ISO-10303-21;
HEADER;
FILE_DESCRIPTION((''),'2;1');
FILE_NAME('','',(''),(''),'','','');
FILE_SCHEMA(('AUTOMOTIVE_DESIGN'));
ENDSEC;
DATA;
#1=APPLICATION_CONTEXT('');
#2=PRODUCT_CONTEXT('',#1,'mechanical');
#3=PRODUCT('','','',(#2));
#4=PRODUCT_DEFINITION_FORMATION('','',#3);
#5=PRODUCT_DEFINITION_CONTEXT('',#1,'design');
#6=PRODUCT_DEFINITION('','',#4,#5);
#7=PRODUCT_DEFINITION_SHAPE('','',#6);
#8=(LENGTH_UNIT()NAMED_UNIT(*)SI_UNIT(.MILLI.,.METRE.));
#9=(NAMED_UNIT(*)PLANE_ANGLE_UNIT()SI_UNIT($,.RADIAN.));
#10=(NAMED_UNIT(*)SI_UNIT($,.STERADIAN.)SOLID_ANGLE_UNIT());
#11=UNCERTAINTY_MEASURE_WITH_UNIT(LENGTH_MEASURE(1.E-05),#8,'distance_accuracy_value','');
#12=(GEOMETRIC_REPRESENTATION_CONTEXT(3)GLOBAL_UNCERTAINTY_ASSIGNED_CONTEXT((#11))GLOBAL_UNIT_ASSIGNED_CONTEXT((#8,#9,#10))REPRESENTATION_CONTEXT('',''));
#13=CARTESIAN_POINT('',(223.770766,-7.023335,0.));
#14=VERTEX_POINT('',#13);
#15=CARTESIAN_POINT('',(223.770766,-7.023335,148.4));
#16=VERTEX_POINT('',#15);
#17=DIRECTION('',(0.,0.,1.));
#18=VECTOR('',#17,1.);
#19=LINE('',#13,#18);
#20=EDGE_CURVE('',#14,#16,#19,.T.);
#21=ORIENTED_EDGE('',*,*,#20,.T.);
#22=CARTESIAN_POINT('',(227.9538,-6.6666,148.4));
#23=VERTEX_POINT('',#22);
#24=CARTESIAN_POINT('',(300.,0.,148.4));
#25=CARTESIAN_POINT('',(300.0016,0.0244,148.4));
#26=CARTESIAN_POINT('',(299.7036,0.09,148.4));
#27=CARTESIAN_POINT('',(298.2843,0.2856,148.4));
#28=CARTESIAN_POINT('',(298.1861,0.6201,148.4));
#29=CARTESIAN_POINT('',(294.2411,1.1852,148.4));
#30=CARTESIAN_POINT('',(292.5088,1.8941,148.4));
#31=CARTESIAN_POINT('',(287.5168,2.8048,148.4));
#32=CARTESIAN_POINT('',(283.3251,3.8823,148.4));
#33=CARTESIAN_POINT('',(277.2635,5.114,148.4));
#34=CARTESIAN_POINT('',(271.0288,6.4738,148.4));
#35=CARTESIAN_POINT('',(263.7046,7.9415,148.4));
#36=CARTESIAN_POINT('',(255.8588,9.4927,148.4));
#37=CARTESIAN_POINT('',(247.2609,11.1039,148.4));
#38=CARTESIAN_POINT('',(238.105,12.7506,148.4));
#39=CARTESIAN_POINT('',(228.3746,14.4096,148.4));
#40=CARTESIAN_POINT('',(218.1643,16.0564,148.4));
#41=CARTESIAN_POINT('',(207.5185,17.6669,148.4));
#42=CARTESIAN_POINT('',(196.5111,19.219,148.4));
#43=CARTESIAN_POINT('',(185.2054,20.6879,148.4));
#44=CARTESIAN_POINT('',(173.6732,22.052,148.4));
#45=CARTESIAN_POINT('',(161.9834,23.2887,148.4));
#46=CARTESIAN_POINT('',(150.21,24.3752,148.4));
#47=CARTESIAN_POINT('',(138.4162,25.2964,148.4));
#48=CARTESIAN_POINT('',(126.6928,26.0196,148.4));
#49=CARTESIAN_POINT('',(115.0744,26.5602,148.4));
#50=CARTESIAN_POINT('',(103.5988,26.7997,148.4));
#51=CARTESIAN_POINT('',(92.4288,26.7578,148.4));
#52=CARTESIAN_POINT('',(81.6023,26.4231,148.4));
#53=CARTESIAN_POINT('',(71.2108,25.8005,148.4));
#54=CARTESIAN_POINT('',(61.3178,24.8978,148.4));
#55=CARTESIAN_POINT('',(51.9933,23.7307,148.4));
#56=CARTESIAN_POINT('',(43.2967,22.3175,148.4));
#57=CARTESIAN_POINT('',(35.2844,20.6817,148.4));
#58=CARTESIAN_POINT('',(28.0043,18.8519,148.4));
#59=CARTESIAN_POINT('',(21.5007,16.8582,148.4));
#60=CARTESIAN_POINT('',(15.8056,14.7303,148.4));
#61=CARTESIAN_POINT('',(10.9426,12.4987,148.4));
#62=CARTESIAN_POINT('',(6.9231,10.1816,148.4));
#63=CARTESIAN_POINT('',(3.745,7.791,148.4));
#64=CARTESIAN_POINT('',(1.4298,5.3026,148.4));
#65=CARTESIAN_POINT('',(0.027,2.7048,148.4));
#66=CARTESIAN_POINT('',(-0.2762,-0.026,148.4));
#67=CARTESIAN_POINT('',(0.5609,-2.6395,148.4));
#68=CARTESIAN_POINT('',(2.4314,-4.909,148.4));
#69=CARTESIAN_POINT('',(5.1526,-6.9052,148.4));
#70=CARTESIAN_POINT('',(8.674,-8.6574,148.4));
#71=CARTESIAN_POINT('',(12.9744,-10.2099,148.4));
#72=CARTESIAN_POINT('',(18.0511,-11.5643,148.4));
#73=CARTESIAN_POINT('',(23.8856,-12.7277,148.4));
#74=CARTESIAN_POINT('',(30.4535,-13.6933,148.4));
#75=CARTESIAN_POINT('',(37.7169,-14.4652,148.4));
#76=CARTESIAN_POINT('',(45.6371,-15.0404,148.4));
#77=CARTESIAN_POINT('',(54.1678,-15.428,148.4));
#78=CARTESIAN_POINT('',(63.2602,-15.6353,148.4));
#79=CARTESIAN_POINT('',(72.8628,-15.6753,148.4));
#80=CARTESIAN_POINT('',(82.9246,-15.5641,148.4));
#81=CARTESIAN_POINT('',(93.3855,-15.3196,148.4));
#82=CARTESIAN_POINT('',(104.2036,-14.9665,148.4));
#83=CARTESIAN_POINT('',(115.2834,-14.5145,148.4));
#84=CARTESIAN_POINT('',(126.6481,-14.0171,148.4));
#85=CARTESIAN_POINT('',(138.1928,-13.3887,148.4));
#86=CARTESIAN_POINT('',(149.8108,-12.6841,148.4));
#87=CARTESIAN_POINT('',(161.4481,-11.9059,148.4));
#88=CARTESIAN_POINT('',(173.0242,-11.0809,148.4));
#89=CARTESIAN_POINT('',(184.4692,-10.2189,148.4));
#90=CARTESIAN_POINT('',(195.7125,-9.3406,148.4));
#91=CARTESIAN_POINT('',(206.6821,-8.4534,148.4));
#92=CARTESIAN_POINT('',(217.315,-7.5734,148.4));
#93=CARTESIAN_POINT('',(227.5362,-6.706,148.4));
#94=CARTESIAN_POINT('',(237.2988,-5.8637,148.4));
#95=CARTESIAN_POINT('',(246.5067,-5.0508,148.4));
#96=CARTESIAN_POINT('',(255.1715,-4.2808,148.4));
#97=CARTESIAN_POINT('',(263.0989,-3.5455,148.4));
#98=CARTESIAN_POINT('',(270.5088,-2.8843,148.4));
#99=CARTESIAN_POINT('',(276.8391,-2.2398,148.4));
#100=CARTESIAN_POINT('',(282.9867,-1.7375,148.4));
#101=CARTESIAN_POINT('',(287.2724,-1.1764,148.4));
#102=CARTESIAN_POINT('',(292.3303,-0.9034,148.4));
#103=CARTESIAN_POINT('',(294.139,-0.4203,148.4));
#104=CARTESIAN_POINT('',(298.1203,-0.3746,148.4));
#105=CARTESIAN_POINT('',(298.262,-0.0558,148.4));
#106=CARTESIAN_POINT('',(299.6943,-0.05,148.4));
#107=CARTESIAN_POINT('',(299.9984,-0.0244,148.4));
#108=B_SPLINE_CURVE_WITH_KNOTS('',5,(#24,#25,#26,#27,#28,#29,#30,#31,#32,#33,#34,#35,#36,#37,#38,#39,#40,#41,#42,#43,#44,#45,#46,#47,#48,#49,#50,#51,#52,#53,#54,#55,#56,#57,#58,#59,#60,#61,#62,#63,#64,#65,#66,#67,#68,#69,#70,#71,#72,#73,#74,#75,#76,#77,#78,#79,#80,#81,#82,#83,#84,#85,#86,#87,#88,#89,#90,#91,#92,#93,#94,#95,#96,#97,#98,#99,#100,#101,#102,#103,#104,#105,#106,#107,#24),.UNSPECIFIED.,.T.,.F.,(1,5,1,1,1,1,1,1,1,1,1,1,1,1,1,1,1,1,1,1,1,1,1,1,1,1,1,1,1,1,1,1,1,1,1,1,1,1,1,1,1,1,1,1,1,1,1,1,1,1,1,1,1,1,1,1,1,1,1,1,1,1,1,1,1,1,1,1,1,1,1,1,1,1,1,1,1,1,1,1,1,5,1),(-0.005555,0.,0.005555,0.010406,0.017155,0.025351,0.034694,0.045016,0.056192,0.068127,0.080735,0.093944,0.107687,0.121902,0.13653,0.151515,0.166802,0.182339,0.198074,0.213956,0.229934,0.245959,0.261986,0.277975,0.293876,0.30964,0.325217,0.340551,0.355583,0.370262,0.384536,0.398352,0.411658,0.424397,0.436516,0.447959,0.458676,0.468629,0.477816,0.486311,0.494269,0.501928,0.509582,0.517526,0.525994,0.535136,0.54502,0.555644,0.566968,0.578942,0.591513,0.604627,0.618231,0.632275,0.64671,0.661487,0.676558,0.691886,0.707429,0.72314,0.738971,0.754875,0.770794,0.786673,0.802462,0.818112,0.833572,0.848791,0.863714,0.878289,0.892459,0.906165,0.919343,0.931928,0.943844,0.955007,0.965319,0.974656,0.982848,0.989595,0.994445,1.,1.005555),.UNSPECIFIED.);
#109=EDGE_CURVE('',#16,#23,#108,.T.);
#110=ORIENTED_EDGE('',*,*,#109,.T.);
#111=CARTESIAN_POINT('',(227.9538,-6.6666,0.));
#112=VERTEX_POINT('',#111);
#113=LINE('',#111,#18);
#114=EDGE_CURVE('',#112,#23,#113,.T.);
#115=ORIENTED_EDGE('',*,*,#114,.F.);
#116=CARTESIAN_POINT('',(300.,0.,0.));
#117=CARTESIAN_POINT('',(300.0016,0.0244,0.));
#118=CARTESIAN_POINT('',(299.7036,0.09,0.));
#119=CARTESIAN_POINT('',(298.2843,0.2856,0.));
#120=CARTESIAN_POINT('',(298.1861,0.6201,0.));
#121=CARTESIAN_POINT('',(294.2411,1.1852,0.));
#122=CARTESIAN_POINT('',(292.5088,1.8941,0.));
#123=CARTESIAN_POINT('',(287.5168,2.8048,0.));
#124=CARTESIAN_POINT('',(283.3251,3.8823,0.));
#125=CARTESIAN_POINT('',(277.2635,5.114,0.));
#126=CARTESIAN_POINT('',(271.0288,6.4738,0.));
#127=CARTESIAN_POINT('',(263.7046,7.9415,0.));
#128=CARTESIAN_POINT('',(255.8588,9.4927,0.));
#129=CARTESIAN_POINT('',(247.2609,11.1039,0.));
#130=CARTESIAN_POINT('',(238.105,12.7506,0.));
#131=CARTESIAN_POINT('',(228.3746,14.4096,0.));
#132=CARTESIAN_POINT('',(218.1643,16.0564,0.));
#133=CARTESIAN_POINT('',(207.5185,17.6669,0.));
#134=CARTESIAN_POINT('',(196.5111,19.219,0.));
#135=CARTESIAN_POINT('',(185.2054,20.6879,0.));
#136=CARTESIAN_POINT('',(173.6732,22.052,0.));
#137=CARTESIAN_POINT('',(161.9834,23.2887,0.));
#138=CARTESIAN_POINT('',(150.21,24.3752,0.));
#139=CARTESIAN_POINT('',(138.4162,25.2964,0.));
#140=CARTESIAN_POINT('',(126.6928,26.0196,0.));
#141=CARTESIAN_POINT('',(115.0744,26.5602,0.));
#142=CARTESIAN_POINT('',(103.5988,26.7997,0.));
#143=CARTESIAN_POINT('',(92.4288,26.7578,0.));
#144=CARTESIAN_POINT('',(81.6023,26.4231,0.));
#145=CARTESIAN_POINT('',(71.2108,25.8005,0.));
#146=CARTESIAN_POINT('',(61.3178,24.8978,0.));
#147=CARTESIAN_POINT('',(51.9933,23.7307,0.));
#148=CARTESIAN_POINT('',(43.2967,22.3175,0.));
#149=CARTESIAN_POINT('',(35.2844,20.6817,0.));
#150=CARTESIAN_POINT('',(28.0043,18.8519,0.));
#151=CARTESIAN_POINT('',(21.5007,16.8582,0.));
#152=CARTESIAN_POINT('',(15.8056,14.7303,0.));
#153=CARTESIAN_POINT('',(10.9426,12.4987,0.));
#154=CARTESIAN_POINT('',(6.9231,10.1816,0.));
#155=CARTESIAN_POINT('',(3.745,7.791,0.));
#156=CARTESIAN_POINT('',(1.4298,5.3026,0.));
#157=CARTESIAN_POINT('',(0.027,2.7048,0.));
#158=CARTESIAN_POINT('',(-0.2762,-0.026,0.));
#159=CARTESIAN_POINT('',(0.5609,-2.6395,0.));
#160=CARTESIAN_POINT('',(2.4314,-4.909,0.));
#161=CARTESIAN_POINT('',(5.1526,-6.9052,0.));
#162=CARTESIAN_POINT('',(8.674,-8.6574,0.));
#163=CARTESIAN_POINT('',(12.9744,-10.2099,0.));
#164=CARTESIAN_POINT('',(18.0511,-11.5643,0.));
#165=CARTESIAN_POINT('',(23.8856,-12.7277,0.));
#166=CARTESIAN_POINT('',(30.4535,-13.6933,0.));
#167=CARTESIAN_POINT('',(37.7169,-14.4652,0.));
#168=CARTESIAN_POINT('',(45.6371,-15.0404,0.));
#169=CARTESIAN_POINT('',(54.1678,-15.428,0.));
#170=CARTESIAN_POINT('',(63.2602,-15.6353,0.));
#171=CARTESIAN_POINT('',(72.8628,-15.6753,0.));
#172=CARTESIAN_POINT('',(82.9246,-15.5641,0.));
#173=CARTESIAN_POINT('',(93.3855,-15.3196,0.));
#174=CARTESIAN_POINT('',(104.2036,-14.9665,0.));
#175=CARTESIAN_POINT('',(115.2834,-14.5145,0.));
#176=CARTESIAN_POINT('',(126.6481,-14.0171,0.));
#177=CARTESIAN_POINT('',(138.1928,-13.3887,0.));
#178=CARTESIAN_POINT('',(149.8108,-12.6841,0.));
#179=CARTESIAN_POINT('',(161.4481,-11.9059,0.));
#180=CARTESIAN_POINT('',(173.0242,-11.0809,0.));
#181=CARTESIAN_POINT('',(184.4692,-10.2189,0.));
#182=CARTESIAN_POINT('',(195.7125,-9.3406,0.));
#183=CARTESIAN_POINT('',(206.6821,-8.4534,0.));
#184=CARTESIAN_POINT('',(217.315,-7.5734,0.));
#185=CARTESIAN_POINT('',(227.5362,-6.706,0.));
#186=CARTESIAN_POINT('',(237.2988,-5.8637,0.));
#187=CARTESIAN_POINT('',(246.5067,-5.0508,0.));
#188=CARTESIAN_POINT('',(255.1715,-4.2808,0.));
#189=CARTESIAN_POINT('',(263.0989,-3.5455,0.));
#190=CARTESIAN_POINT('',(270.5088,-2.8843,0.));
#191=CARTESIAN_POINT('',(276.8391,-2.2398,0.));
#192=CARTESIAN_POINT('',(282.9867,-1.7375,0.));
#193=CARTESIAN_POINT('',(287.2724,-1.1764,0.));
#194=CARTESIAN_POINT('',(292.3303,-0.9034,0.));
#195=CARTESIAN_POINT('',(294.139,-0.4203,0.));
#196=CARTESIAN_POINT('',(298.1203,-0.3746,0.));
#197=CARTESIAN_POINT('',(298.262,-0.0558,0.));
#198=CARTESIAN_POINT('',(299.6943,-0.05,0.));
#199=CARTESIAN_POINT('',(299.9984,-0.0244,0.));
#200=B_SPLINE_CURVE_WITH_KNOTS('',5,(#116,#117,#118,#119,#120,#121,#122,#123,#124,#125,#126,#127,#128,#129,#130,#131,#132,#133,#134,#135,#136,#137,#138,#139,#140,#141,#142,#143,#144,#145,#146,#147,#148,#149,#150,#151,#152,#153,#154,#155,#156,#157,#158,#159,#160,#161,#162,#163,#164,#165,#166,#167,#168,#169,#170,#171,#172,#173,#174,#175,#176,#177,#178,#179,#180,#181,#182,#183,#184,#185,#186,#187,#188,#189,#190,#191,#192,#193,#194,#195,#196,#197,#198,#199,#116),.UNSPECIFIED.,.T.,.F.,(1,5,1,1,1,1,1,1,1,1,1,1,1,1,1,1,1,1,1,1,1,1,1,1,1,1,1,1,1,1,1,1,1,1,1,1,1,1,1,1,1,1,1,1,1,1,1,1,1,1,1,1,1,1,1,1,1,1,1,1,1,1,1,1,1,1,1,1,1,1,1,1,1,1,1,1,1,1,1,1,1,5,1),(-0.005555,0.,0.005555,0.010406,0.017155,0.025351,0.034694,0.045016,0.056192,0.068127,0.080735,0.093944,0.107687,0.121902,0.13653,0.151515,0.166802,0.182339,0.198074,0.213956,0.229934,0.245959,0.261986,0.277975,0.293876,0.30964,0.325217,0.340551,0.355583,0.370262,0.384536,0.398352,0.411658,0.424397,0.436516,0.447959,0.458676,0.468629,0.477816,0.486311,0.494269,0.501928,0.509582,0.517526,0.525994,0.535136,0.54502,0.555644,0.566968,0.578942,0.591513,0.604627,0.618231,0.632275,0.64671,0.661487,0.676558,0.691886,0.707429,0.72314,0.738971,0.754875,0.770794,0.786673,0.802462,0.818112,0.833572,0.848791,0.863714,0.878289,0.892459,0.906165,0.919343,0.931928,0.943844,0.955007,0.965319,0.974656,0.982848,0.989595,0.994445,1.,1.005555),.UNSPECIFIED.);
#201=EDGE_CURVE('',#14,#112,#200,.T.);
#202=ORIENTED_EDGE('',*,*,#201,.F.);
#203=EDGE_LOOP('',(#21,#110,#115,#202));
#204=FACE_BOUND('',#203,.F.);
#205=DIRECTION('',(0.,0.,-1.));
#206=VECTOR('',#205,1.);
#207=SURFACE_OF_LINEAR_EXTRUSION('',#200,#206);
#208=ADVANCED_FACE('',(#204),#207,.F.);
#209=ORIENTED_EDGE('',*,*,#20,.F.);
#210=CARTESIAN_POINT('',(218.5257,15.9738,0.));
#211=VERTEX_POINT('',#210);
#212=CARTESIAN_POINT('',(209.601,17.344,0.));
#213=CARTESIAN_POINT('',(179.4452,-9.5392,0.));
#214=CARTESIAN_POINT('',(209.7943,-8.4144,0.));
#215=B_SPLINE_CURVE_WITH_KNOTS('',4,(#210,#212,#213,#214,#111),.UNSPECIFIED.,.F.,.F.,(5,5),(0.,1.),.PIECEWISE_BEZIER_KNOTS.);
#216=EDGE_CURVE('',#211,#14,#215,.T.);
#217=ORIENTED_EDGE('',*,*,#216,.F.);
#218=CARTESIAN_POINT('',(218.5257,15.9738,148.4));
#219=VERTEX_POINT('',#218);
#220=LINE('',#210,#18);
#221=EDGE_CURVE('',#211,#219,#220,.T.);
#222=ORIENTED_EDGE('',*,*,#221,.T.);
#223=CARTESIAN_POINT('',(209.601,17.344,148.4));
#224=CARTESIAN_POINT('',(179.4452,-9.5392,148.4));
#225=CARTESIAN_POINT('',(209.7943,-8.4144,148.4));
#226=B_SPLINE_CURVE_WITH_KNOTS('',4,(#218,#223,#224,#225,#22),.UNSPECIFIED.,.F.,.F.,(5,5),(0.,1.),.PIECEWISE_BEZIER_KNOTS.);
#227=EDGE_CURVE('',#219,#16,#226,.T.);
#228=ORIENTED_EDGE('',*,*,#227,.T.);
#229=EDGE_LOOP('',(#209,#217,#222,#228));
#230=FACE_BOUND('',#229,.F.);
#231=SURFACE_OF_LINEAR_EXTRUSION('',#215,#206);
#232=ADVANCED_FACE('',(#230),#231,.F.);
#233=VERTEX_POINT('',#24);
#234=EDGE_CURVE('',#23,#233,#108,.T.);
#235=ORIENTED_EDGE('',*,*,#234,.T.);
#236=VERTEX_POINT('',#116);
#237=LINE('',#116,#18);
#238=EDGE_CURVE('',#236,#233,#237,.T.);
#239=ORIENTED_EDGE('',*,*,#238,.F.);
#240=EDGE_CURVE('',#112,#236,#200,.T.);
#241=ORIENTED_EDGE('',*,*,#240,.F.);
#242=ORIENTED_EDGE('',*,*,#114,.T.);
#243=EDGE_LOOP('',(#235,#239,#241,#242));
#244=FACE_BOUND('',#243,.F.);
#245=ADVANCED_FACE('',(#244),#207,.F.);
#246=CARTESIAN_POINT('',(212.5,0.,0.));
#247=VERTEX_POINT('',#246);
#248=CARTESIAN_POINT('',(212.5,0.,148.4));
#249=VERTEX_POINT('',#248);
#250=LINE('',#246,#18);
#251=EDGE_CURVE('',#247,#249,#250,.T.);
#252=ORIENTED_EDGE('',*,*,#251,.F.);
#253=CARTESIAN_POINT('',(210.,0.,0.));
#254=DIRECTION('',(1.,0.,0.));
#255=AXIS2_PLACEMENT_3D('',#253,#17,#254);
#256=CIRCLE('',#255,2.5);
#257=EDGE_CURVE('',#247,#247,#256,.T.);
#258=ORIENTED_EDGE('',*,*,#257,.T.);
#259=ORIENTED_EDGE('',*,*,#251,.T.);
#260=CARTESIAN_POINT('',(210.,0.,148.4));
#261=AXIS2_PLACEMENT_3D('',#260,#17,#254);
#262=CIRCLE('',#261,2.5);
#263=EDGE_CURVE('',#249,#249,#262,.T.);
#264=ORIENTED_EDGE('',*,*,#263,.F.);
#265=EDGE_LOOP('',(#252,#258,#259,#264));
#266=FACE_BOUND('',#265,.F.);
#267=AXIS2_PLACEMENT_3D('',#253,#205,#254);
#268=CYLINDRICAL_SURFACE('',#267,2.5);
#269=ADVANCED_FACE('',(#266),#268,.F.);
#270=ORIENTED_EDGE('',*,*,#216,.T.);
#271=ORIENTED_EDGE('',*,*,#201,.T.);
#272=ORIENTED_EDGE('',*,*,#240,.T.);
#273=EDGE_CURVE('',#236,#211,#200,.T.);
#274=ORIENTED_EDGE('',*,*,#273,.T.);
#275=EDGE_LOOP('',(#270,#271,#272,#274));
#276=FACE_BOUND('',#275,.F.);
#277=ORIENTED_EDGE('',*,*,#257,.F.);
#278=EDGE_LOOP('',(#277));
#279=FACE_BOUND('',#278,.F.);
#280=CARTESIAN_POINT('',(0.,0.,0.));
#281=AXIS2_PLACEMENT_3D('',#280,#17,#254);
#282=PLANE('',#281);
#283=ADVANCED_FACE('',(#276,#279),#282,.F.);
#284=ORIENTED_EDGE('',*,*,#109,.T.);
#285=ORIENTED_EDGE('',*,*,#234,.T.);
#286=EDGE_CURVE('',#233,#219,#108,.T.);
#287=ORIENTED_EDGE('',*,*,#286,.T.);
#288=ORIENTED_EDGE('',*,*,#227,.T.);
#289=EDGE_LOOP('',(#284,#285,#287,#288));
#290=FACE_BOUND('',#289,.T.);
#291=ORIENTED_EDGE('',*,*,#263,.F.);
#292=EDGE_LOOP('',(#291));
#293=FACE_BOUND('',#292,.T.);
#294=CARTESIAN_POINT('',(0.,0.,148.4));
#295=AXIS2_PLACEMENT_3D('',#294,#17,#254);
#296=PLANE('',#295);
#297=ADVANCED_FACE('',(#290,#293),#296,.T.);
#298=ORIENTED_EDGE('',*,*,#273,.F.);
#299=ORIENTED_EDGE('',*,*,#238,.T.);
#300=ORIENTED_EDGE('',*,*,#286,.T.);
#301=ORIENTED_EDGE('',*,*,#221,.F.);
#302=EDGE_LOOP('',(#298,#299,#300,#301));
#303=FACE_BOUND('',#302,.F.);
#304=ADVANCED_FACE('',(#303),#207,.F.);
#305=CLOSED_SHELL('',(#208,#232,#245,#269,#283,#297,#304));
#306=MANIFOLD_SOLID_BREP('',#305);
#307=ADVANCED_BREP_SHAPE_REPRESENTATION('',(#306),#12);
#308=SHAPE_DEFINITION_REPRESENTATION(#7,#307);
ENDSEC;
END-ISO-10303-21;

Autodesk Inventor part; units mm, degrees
ref_plane "YZ Plane" through (0, 0, 0) normal (1, 0, 0) x (0, 1, 0)
ref_plane "XZ Plane" through (0, 0, 0) normal (0, 1, 0) x (-1, 0, 0)
ref_plane "XY Plane" through (0, 0, 0) normal (0, 0, 1) x (1, 0, 0)
sketch "Sketch1" plane through (0, 0, 0) normal (0, 0, 1) x (1, 0, 0)
  spline S0 degree 5 poles (300, 0) (300.0016, 0.0244) (299.7036, 0.09) (298.2843, 0.2856) (298.1861, 0.6201) (294.2411, 1.1852) (292.5088, 1.8941) (287.5168, 2.8048) (283.3251, 3.8823) (277.2635, 5.114) (271.0288, 6.4738) (263.7046, 7.9415) (255.8588, 9.4927) (247.2609, 11.1039) (238.105, 12.7506) (228.3746, 14.4096) (218.1643, 16.0564) (207.5185, 17.6669) (196.5111, 19.219) (185.2054, 20.6879) (173.6732, 22.052) (161.9834, 23.2887) (150.21, 24.3752) (138.4162, 25.2964) (126.6928, 26.0196) (115.0744, 26.5602) (103.5988, 26.7997) (92.4288, 26.7578) (81.6023, 26.4231) (71.2108, 25.8005) (61.3178, 24.8978) (51.9933, 23.7307) (43.2967, 22.3175) (35.2844, 20.6817) (28.0043, 18.8519) (21.5007, 16.8582) (15.8056, 14.7303) (10.9426, 12.4987) (6.9231, 10.1816) (3.745, 7.791) (1.4298, 5.3026) (0.027, 2.7048) (-0.2762, -0.026) (0.5609, -2.6395) (2.4314, -4.909) (5.1526, -6.9052) (8.674, -8.6574) (12.9744, -10.2099) (18.0511, -11.5643) (23.8856, -12.7277) (30.4535, -13.6933) (37.7169, -14.4652) (45.6371, -15.0404) (54.1678, -15.428) (63.2602, -15.6353) (72.8628, -15.6753) (82.9246, -15.5641) (93.3855, -15.3196) (104.2036, -14.9665) (115.2834, -14.5145) (126.6481, -14.0171) (138.1928, -13.3887) (149.8108, -12.6841) (161.4481, -11.9059) (173.0242, -11.0809) (184.4692, -10.2189) (195.7125, -9.3406) (206.6821, -8.4534) (217.315, -7.5734) (227.5362, -6.706) (237.2988, -5.8637) (246.5067, -5.0508) (255.1715, -4.2808) (263.0989, -3.5455) (270.5088, -2.8843) (276.8391, -2.2398) (282.9867, -1.7375) (287.2724, -1.1764) (292.3303, -0.9034) (294.139, -0.4203) (298.1203, -0.3746) (298.262, -0.0558) (299.6943, -0.05) (299.9984, -0.0244) (300, 0) knots 0 0 0 0 0 0 0.005555 0.010406 0.017155 0.025351 0.034694 0.045016 0.056192 0.068127 0.080735 0.093944 0.107687 0.121902 0.13653 0.151515 0.166802 0.182339 0.198074 0.213956 0.229934 0.245959 0.261986 0.277975 0.293876 0.30964 0.325217 0.340551 0.355583 0.370262 0.384536 0.398352 0.411658 0.424397 0.436516 0.447959 0.458676 0.468629 0.477816 0.486311 0.494269 0.501928 0.509582 0.517526 0.525994 0.535136 0.54502 0.555644 0.566968 0.578942 0.591513 0.604627 0.618231 0.632275 0.64671 0.661487 0.676558 0.691886 0.707429 0.72314 0.738971 0.754875 0.770794 0.786673 0.802462 0.818112 0.833572 0.848791 0.863714 0.878289 0.892459 0.906165 0.919343 0.931928 0.943844 0.955007 0.965319 0.974656 0.982848 0.989595 0.994445 1 1 1 1 1 1
  line L0 (200, 103) -> (200, -97) construction
  line L1 (0, -164.4758) -> (0, 307.8549) construction
  line L2 (210, 0) -> (210, -12) construction
  line L3 (210, 0) -> (222, 0) construction
  spline S1 degree 4 poles (218.5257, 15.9738) (209.601, 17.344) (179.4452, -9.5392) (209.7943, -8.4144) (227.9538, -6.6666) knots 0 0 0 0 0 1 1 1 1 1
  line L4 (221.1774, 15.5667) -> (215.874, 16.3809) construction
  arc A0 (220.2542, 15.1852) -> (216.6402, 15.74) centre (217.9961, 12.5243) ccw construction
  line L5 (222.2571, -7.2149) -> (233.6505, -6.1183) construction
  arc A1 (223.3931, -7.0631) -> (232.5064, -6.186) centre (204.1762, 240.3791) ccw construction
  circle A2 centre (210, 0) radius 2.5
  point P0 (0, 0)
  point P1 (298.1739, 0.4338)
  point P2 (295.9008, 0.9681)
  point P3 (292.7367, 1.7025)
  point P4 (288.6996, 2.6229)
  point P5 (283.8129, 3.7134)
  point P6 (278.1048, 4.9545)
  point P7 (271.6086, 6.3255)
  point P8 (264.3621, 7.8039)
  point P9 (256.4085, 9.3663)
  point P10 (247.7946, 10.9887)
  point P11 (238.572, 12.6468)
  point P12 (228.7959, 14.3166)
  point P13 (207.8235, 17.5944)
  point P14 (196.755, 19.155)
  point P15 (185.388, 20.6319)
  point P16 (173.7924, 22.0023)
  point P17 (162.0405, 23.2434)
  point P18 (150.2055, 24.3336)
  point P19 (138.3615, 25.2522)
  point P20 (126.5832, 25.98)
  point P21 (114.8976, 26.493)
  point P22 (103.3635, 26.7315)
  point P23 (92.1183, 26.6775)
  point P24 (81.2367, 26.3292)
  point P25 (70.7922, 25.689)
  point P26 (60.8541, 24.7656)
  point P27 (51.489, 23.5734)
  point P28 (42.7587, 22.131)
  point P29 (34.7199, 20.4618)
  point P30 (27.4239, 18.5934)
  point P31 (20.9172, 16.5555)
  point P32 (15.2385, 14.379)
  point P33 (10.422, 12.0954)
  point P34 (6.4944, 9.7347)
  point P35 (3.4767, 7.3239)
  point P36 (1.3836, 4.8867)
  point P37 (0.2238, 2.4411)
  point P38 (0, 0)
  point P39 (0.7011, -2.3487)
  point P40 (2.31, -4.5201)
  point P41 (4.8123, -6.5094)
  point P42 (8.1885, -8.3112)
  point P43 (12.414, -9.9204)
  point P44 (17.4594, -11.3319)
  point P45 (23.2908, -12.5418)
  point P46 (29.871, -13.5477)
  point P47 (37.1583, -14.3505)
  point P48 (45.1092, -14.9526)
  point P49 (53.6766, -15.3609)
  point P50 (62.8101, -15.5853)
  point P51 (72.4581, -15.639)
  point P52 (82.566, -15.5385)
  point P53 (93.0768, -15.3033)
  point P54 (103.9314, -14.9544)
  point P55 (115.0689, -14.514)
  point P56 (126.4866, -13.9956)
  point P57 (138.1008, -13.3755)
  point P58 (149.7945, -12.6672)
  point P59 (161.4972, -11.8896)
  point P60 (173.1378, -11.061)
  point P61 (184.6455, -10.1973)
  point P62 (195.9501, -9.3141)
  point P63 (206.9814, -8.4237)
  point P64 (217.6716, -7.5381)
  point P65 (227.9538, -6.6666)
  point P66 (237.7638, -5.8185)
  point P67 (247.0398, -5.0019)
  point P68 (255.7236, -4.2234)
  point P69 (263.7597, -3.4905)
  point P70 (271.0965, -2.8098)
  point P71 (277.6872, -2.1882)
  point P72 (283.4889, -1.6323)
  point P73 (288.4641, -1.1487)
  point P74 (292.5804, -0.7434)
  point P75 (295.8102, -0.4221)
  point P76 (298.1328, -0.1887)
  point P77 (299.5323, -0.0474)
  point P78 (200, 0)
  point P79 (223.7705, -7.0234)
  dimension "d0" = 200
  dimension "d2" = 200
  dimension "d3" = 12
  dimension "d4" = 90
  dimension "d5" = 10
  dimension "d17" = 5
extrude "Extrusion2" add sketch "Sketch1" along normal blind 148.4 contours S0 S1 picked at (264.3061, 0.3433)
properties part number "4P.01.01.01-TW-v1-Flap Shape Definition" material "Polyurethane Foam"
